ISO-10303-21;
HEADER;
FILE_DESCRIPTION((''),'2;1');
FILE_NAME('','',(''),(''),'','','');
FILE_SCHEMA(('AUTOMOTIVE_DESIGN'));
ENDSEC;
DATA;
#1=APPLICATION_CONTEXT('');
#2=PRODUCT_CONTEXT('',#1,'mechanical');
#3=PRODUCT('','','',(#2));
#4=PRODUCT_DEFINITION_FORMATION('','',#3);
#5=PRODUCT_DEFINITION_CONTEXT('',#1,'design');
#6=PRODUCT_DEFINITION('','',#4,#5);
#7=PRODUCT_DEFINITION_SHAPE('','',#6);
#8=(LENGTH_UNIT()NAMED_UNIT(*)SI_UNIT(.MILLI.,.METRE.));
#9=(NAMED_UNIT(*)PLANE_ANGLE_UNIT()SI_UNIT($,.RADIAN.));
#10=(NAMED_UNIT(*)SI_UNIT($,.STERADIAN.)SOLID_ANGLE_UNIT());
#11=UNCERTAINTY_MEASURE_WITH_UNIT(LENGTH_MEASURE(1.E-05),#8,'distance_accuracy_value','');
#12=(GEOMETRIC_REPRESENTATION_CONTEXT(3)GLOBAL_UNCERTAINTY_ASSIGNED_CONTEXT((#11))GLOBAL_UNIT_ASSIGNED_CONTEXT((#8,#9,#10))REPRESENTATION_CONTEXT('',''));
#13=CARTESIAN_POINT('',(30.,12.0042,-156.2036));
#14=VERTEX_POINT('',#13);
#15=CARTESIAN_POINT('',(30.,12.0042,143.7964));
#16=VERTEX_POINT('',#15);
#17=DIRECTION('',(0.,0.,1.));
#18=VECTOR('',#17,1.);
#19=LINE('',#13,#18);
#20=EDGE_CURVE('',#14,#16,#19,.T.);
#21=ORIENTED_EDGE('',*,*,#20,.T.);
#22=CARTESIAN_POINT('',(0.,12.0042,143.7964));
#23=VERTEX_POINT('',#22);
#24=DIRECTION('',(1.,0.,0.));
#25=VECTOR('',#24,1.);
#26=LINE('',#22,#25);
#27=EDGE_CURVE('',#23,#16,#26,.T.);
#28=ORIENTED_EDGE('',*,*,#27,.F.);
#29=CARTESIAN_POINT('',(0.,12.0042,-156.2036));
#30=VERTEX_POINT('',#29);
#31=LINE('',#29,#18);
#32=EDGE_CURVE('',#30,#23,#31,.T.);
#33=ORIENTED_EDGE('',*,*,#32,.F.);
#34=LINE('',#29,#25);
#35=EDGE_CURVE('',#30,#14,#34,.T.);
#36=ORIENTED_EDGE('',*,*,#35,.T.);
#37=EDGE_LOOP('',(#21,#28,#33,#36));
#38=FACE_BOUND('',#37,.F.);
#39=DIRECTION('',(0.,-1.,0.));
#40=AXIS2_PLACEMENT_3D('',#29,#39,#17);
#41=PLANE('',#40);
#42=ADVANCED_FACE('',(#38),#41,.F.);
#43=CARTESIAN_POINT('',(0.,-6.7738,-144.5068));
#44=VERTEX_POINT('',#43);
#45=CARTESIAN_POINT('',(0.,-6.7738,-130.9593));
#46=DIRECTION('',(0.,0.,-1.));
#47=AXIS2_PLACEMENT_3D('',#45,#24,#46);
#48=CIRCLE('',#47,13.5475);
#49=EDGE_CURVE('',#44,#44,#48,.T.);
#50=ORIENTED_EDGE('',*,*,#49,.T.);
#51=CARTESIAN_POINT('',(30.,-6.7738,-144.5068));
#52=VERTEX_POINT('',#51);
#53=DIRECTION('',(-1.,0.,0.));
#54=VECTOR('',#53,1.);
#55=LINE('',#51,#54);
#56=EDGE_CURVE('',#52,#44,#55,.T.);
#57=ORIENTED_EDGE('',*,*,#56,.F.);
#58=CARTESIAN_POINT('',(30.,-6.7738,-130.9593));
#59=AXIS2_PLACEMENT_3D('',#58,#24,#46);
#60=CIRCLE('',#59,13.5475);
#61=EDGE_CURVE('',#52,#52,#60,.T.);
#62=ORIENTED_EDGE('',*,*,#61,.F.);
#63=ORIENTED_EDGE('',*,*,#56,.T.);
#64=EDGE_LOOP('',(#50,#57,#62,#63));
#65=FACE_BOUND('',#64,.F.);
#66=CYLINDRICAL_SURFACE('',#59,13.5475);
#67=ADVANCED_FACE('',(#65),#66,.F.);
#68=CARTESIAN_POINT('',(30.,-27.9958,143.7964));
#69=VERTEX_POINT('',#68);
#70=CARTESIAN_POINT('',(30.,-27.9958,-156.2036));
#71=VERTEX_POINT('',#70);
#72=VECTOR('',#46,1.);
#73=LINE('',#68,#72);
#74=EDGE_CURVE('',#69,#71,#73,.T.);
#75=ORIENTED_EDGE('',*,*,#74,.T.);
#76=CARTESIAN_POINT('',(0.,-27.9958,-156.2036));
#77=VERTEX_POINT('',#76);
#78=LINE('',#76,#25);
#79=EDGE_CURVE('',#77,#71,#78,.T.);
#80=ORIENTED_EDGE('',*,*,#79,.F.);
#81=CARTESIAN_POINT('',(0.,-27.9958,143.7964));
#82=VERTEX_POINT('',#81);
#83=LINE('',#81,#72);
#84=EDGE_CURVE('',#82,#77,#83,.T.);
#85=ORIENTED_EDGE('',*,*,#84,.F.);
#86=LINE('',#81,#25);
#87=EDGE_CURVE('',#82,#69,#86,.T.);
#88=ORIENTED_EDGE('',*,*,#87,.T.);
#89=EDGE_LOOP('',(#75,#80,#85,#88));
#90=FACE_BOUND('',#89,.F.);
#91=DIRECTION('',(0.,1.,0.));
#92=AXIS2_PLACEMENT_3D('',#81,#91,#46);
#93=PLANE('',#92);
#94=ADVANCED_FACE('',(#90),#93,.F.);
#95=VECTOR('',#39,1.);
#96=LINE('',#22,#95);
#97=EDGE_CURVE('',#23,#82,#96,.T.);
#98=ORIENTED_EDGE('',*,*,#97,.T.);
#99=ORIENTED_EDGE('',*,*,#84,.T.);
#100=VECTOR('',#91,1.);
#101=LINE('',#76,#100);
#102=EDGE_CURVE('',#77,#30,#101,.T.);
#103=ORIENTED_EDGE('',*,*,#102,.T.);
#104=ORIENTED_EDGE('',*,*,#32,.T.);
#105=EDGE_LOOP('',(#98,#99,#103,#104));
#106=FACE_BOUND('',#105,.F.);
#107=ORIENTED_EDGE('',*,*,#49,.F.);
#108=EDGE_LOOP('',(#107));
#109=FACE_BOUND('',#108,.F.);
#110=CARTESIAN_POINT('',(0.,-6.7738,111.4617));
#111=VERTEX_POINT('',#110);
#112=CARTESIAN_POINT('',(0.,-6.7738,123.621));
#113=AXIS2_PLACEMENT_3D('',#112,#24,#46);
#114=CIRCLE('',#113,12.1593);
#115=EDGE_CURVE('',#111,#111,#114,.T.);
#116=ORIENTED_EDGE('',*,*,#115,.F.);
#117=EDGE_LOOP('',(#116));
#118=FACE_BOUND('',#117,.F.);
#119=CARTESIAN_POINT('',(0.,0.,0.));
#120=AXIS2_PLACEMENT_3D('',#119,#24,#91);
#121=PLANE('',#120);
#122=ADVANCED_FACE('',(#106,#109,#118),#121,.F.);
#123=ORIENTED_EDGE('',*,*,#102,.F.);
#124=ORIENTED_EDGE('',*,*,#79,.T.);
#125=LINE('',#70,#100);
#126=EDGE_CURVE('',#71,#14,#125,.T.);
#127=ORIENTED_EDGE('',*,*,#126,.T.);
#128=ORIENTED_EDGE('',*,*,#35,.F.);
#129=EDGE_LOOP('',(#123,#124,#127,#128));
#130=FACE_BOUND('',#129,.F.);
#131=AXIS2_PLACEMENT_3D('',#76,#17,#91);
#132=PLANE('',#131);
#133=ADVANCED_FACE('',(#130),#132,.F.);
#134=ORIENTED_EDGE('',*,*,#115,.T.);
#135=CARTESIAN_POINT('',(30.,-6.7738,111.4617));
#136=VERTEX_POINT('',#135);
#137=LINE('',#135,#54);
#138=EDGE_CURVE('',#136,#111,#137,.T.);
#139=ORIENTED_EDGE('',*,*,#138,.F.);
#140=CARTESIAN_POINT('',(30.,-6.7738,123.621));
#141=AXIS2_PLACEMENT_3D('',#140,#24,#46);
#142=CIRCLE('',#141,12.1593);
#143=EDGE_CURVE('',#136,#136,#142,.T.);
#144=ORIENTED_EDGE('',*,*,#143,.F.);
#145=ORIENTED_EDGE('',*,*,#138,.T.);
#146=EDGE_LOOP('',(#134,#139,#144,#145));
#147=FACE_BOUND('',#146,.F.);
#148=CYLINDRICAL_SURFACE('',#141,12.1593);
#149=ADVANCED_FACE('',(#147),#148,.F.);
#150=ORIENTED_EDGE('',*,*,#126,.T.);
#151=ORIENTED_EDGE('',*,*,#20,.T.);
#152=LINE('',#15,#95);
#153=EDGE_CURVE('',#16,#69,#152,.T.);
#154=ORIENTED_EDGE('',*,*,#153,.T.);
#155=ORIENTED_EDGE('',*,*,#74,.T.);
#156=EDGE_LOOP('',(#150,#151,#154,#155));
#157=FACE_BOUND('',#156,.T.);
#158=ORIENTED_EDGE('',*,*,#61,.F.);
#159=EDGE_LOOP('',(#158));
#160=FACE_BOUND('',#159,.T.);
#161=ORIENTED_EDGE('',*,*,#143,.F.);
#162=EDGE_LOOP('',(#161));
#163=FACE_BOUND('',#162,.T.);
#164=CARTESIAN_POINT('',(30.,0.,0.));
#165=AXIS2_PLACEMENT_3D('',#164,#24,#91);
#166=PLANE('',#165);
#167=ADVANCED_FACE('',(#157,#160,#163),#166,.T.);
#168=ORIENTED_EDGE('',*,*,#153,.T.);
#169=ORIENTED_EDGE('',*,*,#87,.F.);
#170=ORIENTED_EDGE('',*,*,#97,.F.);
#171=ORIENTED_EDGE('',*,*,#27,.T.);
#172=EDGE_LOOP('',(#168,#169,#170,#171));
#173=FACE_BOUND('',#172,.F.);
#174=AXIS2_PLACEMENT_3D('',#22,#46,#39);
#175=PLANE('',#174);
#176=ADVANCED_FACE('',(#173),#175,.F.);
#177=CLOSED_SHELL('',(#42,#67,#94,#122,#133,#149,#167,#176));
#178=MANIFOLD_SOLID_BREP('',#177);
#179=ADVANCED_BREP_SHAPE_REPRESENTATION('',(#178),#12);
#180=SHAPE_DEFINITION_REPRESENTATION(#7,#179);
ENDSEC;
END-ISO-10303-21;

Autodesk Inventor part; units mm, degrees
ref_plane "YZ Plane" through (0, 0, 0) normal (1, 0, 0) x (0, 1, 0)
ref_plane "XZ Plane" through (0, 0, 0) normal (0, 1, 0) x (-1, 0, 0)
ref_plane "XY Plane" through (0, 0, 0) normal (0, 0, 1) x (1, 0, 0)
sketch "Sketch1" plane through (0, 0, 0) normal (1, 0, 0) x (0, 1, 0)
  line L0 (12.0042, 143.7964) -> (-27.9958, 143.7964)
  line L1 (-27.9958, 143.7964) -> (-27.9958, -156.2036)
  line L2 (-27.9958, -156.2036) -> (12.0042, -156.2036)
  line L3 (12.0042, -156.2036) -> (12.0042, 143.7964)
  point P0 (0, 0)
  dimension "d0" = 300
  dimension "d1" = 40
extrude "Extrusion1" add sketch "Sketch1" along normal blind 30
sketch "Sketch2" plane through (30, 0, 0) normal (1, 0, 0) x (0, 0, -1)
  circle A0 centre (-123.621, -6.7738) radius 12.1593
  circle A1 centre (130.9593, -6.7738) radius 13.5475
  point P0 (0, 0)
extrude "Extrusion2" cut sketch "Sketch2" against normal blind 30
properties part number "ejemplo_tibia"
